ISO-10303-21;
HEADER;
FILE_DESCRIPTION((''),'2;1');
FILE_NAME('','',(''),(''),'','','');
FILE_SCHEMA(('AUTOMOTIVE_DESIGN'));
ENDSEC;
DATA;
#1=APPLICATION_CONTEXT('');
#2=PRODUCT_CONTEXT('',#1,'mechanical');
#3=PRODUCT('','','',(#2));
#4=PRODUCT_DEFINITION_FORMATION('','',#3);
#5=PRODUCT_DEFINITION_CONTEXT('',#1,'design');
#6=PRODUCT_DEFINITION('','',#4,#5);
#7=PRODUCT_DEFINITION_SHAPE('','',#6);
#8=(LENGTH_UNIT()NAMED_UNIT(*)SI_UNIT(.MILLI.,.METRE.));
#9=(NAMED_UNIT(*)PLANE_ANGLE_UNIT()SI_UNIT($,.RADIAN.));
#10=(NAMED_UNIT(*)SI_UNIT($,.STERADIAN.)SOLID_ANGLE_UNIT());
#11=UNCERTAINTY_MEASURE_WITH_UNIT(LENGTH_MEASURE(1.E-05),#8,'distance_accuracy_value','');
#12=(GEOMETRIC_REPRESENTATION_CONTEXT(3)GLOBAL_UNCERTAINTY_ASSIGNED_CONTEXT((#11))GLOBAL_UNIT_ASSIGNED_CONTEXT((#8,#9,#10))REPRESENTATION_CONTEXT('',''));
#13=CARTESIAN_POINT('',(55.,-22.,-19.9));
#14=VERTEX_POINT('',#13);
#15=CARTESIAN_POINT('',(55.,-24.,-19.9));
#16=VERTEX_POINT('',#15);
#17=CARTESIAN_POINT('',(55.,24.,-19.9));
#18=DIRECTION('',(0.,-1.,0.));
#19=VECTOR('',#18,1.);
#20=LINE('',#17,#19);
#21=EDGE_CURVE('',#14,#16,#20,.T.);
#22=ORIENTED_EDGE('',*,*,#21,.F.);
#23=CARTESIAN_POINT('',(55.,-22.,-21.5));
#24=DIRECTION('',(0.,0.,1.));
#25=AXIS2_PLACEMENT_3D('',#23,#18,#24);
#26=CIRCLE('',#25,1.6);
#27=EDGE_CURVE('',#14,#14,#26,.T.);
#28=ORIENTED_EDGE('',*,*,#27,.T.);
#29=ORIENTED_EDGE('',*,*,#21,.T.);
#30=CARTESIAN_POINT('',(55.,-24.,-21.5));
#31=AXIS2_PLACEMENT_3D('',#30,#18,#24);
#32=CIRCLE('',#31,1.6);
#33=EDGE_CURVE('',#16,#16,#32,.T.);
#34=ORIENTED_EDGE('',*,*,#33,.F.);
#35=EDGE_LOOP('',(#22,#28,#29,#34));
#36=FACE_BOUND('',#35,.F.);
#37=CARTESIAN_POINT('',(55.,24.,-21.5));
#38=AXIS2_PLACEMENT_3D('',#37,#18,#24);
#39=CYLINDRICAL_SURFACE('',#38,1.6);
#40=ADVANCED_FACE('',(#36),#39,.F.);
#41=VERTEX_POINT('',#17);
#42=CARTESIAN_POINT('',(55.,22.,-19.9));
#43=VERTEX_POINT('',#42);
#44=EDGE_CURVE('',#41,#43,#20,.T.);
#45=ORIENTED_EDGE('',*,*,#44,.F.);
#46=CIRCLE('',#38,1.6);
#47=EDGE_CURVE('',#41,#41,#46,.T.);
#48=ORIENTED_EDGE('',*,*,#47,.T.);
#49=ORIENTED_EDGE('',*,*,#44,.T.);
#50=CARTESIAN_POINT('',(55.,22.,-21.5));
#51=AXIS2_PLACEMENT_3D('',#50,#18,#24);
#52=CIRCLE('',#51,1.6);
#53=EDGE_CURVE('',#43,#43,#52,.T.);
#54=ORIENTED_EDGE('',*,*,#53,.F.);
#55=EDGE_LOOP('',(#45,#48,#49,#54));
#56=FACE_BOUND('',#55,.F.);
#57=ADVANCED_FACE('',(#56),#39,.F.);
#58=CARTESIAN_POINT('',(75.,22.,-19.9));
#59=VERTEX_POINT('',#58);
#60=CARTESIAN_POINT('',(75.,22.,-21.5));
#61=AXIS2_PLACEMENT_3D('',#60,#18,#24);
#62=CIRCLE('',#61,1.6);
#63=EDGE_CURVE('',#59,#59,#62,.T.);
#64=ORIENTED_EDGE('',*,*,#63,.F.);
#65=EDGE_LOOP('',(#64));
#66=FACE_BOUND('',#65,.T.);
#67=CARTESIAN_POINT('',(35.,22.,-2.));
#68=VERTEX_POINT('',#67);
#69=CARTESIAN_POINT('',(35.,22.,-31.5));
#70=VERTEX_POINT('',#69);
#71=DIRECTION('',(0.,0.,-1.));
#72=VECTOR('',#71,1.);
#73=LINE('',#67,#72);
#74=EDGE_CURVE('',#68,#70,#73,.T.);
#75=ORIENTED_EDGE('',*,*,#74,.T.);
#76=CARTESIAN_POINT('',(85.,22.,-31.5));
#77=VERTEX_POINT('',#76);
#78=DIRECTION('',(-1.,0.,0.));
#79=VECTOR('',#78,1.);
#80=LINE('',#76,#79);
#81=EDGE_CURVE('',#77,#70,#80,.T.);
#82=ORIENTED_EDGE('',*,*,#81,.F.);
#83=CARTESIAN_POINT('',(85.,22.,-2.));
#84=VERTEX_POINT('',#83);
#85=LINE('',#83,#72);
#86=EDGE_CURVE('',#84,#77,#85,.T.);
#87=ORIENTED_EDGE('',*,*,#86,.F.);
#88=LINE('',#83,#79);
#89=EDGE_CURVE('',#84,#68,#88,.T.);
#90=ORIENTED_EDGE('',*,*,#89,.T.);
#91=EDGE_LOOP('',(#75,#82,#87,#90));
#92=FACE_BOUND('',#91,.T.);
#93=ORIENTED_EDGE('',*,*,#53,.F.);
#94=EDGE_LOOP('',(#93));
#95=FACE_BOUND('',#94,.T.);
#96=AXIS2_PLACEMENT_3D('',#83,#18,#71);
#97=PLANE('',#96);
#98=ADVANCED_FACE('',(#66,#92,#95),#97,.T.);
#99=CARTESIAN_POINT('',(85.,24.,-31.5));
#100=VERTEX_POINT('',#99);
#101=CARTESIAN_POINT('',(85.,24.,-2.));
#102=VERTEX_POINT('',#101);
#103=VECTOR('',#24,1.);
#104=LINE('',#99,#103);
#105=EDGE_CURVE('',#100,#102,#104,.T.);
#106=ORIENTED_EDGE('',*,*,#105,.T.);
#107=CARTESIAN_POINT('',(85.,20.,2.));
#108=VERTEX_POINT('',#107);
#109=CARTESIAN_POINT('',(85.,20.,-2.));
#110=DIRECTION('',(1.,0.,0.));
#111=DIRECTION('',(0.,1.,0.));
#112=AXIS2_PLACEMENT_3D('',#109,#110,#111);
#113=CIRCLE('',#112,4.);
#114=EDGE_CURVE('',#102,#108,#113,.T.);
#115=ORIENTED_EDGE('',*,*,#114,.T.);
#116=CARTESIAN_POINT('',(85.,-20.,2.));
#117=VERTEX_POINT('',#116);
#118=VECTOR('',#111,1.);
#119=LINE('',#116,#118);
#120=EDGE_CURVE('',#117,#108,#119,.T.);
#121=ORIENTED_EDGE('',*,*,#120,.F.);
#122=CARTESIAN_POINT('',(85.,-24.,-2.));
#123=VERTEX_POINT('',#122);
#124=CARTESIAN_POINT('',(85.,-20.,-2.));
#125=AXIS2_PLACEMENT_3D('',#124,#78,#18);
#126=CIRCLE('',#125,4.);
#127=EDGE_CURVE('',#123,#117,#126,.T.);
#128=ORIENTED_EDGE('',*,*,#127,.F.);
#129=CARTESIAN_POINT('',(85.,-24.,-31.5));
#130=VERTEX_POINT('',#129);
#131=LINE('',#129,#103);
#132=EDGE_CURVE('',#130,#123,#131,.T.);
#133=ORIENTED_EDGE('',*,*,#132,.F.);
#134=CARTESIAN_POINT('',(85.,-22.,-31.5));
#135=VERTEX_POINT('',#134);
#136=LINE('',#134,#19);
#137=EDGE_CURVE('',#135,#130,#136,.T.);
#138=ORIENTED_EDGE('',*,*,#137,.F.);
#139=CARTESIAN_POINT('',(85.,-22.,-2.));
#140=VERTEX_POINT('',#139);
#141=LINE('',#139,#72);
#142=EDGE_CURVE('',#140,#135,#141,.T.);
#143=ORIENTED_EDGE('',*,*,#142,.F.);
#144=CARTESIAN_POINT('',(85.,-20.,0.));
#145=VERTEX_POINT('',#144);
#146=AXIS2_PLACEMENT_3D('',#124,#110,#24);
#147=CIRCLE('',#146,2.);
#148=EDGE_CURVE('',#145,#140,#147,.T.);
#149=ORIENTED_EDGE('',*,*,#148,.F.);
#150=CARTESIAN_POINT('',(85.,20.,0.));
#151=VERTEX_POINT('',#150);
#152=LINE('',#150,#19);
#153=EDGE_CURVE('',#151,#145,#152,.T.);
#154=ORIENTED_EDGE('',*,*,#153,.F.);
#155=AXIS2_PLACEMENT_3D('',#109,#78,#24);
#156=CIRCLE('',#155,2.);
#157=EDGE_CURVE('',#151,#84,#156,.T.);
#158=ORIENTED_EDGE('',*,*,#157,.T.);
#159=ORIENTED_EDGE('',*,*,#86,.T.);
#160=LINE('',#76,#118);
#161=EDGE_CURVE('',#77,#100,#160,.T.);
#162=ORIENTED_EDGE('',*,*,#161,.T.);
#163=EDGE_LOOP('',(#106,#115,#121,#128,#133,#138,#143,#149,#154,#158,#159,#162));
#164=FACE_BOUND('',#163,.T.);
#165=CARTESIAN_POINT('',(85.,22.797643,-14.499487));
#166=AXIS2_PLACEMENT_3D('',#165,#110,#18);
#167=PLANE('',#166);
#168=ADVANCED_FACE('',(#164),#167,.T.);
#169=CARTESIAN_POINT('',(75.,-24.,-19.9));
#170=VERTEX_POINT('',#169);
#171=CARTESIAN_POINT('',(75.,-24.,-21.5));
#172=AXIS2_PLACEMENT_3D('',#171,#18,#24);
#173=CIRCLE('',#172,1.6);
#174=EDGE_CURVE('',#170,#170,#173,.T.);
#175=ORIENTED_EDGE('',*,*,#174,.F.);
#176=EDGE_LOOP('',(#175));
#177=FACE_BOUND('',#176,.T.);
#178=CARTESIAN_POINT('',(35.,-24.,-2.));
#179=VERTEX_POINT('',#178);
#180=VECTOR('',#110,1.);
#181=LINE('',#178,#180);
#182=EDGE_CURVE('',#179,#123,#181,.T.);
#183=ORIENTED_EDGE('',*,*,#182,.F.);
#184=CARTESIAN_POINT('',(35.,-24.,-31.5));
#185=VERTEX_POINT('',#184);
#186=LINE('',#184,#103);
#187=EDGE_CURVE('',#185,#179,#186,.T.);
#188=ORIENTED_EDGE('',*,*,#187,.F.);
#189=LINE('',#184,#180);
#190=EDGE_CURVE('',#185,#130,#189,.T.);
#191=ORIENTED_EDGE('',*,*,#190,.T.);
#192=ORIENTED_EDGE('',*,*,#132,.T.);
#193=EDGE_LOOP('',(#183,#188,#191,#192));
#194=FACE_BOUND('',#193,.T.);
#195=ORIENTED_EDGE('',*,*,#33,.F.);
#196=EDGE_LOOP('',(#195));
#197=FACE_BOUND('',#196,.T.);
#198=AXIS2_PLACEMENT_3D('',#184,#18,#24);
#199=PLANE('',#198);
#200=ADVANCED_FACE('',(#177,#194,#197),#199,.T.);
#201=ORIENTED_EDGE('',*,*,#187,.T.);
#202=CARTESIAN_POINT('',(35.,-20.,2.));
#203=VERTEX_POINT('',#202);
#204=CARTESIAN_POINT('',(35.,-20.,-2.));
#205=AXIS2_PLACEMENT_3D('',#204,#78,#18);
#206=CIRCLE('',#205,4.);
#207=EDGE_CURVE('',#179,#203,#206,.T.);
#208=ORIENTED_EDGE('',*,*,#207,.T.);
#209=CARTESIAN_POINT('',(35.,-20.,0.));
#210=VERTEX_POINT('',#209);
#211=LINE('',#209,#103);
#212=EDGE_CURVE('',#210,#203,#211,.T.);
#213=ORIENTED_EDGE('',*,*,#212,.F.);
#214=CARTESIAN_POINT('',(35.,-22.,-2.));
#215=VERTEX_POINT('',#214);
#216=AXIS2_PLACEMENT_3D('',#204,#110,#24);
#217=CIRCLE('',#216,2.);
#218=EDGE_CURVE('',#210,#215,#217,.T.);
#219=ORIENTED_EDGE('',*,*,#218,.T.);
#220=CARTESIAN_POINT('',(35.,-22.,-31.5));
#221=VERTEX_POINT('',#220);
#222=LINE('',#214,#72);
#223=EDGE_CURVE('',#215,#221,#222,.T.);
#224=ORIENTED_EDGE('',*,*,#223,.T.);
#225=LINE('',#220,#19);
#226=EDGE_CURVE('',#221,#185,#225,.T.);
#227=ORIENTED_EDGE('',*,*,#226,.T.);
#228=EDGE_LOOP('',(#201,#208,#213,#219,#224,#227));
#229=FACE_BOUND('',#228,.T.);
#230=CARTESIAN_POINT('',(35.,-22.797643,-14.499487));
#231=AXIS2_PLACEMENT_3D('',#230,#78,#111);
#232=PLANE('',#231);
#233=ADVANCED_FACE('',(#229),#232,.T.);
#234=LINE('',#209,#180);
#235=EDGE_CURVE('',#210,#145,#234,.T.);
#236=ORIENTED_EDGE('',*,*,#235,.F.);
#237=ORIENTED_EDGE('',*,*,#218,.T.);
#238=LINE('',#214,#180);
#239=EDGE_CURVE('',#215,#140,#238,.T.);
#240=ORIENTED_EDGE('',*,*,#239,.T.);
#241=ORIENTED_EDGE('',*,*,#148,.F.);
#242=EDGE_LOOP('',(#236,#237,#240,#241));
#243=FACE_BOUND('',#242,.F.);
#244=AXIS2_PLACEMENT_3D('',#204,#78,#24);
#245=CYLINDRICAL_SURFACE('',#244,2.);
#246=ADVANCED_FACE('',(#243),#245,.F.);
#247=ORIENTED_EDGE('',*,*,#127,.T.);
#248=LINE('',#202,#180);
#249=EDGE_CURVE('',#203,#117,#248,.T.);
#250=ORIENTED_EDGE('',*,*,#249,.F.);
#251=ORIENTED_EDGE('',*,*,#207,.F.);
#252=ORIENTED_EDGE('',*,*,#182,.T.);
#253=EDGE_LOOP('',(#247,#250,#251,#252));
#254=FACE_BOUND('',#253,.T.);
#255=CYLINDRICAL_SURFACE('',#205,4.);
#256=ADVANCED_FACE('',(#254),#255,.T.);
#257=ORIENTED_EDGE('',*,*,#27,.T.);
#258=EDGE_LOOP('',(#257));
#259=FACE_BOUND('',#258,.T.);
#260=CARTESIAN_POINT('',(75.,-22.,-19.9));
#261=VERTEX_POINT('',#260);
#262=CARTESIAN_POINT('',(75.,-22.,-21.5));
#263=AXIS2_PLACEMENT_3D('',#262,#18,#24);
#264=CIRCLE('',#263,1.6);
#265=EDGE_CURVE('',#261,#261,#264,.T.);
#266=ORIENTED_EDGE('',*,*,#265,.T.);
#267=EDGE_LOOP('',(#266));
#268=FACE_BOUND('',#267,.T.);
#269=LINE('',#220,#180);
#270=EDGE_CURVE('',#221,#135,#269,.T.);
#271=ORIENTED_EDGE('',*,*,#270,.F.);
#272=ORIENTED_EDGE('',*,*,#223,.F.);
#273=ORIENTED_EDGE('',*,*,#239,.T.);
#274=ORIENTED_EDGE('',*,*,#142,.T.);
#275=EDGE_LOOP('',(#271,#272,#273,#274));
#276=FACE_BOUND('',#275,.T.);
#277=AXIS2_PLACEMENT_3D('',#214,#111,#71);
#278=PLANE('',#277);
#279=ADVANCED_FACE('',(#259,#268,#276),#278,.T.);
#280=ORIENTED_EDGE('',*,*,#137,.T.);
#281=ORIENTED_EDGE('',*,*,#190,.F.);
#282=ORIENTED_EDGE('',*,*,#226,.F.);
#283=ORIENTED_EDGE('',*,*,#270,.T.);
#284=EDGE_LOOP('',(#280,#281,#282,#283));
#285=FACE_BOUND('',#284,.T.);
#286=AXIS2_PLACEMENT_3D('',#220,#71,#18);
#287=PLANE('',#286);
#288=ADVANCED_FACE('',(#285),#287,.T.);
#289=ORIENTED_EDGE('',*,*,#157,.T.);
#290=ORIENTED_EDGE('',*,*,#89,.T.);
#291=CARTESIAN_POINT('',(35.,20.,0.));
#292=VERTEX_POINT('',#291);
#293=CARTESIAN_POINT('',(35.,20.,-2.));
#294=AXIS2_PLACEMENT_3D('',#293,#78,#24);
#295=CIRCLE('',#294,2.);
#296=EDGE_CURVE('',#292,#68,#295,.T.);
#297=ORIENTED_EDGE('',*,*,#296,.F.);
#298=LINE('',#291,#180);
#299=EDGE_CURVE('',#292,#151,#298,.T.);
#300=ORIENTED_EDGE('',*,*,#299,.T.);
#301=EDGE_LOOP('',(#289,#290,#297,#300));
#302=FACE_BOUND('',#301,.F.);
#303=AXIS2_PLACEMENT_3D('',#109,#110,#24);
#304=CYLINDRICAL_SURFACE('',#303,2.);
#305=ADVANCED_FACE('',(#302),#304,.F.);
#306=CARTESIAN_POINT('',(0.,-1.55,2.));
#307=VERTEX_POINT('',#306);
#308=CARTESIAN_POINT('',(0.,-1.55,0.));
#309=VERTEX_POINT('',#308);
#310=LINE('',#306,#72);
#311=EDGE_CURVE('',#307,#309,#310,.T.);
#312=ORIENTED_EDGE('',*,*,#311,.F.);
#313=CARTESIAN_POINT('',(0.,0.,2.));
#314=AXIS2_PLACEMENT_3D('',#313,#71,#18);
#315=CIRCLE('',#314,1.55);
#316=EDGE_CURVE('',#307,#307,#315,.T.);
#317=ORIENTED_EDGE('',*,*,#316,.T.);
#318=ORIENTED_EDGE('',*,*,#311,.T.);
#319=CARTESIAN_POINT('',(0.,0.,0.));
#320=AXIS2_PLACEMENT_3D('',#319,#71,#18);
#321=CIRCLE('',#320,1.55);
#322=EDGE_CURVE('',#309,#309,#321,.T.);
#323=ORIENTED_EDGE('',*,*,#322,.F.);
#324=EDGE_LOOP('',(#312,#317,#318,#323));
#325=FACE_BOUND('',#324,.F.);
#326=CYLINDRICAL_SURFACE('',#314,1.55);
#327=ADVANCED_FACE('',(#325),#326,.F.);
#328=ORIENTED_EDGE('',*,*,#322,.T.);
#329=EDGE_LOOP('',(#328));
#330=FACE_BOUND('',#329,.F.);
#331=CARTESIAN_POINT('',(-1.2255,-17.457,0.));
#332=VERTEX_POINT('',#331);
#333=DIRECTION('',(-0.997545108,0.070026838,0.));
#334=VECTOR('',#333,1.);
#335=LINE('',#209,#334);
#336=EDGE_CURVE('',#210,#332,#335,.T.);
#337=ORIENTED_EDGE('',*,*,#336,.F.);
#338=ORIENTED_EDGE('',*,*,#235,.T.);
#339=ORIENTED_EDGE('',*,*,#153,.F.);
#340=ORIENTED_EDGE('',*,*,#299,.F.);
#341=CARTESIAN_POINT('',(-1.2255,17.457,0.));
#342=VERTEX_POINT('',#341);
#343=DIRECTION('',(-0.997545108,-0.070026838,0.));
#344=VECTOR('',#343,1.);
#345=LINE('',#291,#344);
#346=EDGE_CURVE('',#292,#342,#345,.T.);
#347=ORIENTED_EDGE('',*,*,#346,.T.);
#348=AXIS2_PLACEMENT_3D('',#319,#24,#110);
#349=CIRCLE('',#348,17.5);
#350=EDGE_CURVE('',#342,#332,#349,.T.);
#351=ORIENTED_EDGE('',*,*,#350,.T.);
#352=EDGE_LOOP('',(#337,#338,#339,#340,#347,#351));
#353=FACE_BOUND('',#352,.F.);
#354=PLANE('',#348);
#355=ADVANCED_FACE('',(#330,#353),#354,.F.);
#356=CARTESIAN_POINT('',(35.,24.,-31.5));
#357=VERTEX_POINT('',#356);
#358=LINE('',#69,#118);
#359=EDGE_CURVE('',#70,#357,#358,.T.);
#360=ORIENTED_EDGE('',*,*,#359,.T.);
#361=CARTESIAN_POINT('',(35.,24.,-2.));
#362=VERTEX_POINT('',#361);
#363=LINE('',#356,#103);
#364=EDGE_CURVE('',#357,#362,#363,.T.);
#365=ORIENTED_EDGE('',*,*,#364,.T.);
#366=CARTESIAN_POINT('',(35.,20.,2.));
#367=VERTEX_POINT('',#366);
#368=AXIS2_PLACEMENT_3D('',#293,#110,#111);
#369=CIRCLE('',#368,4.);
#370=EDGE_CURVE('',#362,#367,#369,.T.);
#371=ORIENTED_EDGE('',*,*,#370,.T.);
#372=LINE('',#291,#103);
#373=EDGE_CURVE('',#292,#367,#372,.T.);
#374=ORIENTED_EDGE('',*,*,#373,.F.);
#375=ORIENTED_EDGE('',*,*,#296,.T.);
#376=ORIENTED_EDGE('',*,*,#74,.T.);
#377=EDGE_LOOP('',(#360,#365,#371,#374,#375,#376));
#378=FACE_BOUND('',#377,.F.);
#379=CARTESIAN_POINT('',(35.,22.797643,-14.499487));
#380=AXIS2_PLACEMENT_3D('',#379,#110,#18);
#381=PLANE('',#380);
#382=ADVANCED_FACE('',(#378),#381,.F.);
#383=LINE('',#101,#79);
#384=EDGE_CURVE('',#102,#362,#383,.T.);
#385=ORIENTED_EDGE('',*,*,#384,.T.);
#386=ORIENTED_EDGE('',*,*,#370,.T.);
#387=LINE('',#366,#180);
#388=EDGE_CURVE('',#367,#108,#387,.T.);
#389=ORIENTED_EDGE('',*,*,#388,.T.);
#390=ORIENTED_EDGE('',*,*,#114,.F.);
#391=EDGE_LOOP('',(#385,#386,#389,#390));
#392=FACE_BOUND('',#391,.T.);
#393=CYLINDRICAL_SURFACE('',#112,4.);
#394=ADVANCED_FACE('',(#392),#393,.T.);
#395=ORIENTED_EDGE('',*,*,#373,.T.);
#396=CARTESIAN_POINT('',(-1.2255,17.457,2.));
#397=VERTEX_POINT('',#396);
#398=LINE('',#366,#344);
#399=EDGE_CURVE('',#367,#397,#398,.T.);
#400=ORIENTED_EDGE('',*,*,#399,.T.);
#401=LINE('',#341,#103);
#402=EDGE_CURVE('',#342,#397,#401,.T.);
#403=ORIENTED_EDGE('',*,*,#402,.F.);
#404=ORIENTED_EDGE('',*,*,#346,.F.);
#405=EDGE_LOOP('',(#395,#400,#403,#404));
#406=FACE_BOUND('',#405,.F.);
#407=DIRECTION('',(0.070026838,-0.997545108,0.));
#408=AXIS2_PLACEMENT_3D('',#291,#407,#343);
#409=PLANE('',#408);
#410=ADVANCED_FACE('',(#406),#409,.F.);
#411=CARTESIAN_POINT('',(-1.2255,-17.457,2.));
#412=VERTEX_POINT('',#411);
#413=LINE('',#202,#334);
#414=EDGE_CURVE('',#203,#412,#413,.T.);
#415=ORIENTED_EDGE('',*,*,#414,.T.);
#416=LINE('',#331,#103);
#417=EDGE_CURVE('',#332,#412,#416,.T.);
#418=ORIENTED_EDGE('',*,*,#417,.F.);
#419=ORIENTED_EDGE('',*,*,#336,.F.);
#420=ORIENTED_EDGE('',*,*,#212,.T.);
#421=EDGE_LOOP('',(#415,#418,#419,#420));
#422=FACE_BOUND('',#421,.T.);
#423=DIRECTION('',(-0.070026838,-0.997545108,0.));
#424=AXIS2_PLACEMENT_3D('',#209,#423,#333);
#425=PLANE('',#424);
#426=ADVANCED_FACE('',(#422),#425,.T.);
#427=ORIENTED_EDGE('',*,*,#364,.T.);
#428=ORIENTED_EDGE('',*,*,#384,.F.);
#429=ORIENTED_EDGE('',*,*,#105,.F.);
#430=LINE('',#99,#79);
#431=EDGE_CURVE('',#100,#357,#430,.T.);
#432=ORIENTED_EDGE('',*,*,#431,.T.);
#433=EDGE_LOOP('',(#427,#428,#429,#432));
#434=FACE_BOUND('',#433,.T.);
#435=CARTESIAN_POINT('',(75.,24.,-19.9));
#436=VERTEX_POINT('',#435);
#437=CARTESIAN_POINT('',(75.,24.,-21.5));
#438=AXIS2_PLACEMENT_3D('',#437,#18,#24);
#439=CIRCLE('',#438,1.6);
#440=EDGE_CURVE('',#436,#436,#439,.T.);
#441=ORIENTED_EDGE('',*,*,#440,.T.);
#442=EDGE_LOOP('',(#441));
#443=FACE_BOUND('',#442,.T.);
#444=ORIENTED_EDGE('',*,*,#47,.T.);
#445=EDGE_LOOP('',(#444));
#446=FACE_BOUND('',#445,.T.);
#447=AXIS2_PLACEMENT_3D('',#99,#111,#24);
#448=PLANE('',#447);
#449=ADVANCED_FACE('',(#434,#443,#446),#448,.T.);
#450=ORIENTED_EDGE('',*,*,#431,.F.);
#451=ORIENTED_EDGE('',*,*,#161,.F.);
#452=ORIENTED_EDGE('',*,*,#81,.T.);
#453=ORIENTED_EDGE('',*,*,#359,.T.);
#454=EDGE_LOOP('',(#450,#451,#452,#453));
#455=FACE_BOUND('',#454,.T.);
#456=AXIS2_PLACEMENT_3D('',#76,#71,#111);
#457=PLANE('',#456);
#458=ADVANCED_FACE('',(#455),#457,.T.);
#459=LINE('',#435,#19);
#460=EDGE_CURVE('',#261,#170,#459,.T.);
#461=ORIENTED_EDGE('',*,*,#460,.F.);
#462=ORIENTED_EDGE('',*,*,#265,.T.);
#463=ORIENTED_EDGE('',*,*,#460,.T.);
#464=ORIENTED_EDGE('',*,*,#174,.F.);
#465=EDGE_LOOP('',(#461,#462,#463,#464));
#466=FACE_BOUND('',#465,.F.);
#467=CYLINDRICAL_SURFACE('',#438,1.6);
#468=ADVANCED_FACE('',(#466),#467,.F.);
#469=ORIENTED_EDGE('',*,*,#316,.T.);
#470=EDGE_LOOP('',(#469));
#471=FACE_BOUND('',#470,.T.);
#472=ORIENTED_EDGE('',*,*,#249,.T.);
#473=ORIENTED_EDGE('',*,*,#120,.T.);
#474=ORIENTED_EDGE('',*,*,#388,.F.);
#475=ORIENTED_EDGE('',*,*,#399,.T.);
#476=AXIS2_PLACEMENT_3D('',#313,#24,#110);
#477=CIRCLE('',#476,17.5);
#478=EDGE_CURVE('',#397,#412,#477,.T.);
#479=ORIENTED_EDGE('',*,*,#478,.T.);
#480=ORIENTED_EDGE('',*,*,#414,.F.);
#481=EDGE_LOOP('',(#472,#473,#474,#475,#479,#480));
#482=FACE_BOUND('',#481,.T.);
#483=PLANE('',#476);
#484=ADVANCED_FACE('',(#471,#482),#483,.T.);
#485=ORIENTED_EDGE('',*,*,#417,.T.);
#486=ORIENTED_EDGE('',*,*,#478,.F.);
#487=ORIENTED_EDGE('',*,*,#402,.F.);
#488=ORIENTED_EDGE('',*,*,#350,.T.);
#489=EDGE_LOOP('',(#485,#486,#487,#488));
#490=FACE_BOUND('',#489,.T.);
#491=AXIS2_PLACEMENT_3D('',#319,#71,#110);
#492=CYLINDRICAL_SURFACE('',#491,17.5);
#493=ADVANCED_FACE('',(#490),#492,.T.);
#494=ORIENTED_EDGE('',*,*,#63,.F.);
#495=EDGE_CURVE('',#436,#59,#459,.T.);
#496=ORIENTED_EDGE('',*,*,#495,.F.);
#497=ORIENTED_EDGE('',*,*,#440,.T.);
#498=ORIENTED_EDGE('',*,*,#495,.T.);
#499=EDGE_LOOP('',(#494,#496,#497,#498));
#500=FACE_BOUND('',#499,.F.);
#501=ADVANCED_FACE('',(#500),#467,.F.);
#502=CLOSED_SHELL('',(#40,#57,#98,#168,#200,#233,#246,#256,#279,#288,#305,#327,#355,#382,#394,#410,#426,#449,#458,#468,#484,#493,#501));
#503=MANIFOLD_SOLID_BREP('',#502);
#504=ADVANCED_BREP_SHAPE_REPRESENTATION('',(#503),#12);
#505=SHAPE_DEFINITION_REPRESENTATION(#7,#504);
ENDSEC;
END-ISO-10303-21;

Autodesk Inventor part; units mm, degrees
ref_plane "YZ Plane" through (0, 0, 0) normal (1, 0, 0) x (0, 1, 0)
ref_plane "XZ Plane" through (0, 0, 0) normal (0, 1, 0) x (-1, 0, 0)
ref_plane "XY Plane" through (0, 0, 0) normal (0, 0, 1) x (1, 0, 0)
sketch "スケッチ1" plane through (0, 0, 0) normal (0, 0, 1) x (1, 0, 0)
  circle A0 centre (0, 0) radius 17.5
  line L0 (0, 0) -> (35, 0)
  line L1 (35, 0) -> (35, 20)
  line L2 (35, 20) -> (-1.2255, 17.457)
  line L3 (35, 20) -> (85, 20)
  line L4 (85, 20) -> (85, 0)
  line L5 (85, 0) -> (35, 0)
  line L6 (35, 0) -> (35, 20)
  line L7 (35, 0) -> (35, -20)
  line L8 (35, -20) -> (-1.2255, -17.457)
  line L9 (35, -20) -> (85, -20)
  line L10 (85, -20) -> (85, 0)
  point P0 (-1.2255, -17.457)
  dimension "d0" = 35
  dimension "d1" = 35
  dimension "d2" = 20
  dimension "d3" = 20
  dimension "d4" = 50
extrude "プレート1" add sketch "スケッチ1" along normal blind 2
sketch "スケッチ2" plane through (85, 22, -2) normal (0, 1, 0) x (-1, 0, 0)
  line L0 (50, 0) -> (0, 0)
  line L1 (0, 0) -> (0, -29.5)
  line L2 (0, -29.5) -> (50, -29.5)
  line L3 (50, -29.5) -> (50, 0)
edge flange "フランジ1" height 33.5 angle 90 thickness 2 bend radius 2 thickness toward (0, 1, 0) relief tear relief width 2 relief depth 1 corner gap 2 corner form 0 edges at (60, 20, 0) (60, -20, 0) wall of the first edge with corners at (35, 22, -2) (85, 22, -2) (85, 22, -31.5) (35, 22, -31.5)
bend "曲げ1"
corner "コーナー1"
sketch "スケッチ3" plane through (0, 0, 2) normal (0, 0, 1) x (1, 0, 0)
  circle A0 centre (0, 0) radius 12
  point P0 (0, 12)
  point P1 (-10.3923, 6)
  point P2 (-10.3923, -6)
  point P3 (0, -12)
  point P4 (10.3923, -6)
  point P5 (10.3923, 6)
  dimension "d16" = 24
  dimension "d19" = 360
hole "穴1" [suppressed]
sketch "スケッチ4" plane through (0, 0, 2) normal (0, 0, 1) x (1, 0, 0)
  arc A0 (-1.2255, 17.457) -> (-1.2255, -17.457) centre (0, 0) ccw projected
  circle A1 centre (0, 0) radius 6.25
  dimension "d28" = 12.5
extrude "押し出し1" [suppressed]
sketch "スケッチ5" plane through (35, 24, -31.5) normal (0, 1, 0) x (1, 0, 0)
  line L0 (0, 0) -> (0, -29.5) projected
  line L1 (0, -10) -> (50, -10)
  line L2 (50, -29.5) -> (50, 0) projected
  line L3 (50, 0) -> (0, 0) projected
  line L4 (10, 0) -> (10, -29.5)
  line L5 (0, -29.5) -> (50, -29.5) projected
  point P0 (-35, -31.5)
  point P1 (20, -10)
  point P2 (40, -10)
  dimension "d31" = 10
  dimension "d32" = 10
  dimension "d33" = 10
  dimension "d34" = 20
hole "穴2" at (55, 24, -21.5) at (75, 24, -21.5) direction (0, -1, 0) diameter 3.2 end through all
sketch "スケッチ6" plane through (0, 0, 2) normal (0, 0, 1) x (1, 0, 0)
  point P0 (0, 0)
  point P1 (0, 0)
hole "穴3" at (0, 0, 2) direction (0, 0, -1) diameter 3.1 end through all
equation "\"d26\" = Thickness"
equation "\"d47\" = Thickness"
equation "\"d5\" = Thickness"
equation "\"d6\" = BendReliefWidth"
equation "\"d7\" = BendReliefDepth"
equation "\"d8\" = MinimumRemnant"
equation "\"d9\" = TransitionRadius"
equation "\"d12\" = BendRadius"
equation "\"d13\" = CornerReliefSize"
equation "\"d14\" = GapSize"
equation "\"d15\" = JacobiRadiusSize"
equation "\"BendRadius\" = Thickness"
equation "\"BendReliefWidth\" = Thickness"
equation "\"BendReliefDepth\" = 0.5 * Thickness"
equation "\"CornerReliefSize\" = 4 * Thickness"
equation "\"MinimumRemnant\" = 2 * Thickness"
equation "\"TransitionRadius\" = BendRadius"
equation "\"JacobiRadiusSize\" = BendRadius"
equation "\"GapSize\" = Thickness"
equation "\"Thickness\" = 2"
properties part number "servoplate2_forR0" material "アルミニウム 6061"
